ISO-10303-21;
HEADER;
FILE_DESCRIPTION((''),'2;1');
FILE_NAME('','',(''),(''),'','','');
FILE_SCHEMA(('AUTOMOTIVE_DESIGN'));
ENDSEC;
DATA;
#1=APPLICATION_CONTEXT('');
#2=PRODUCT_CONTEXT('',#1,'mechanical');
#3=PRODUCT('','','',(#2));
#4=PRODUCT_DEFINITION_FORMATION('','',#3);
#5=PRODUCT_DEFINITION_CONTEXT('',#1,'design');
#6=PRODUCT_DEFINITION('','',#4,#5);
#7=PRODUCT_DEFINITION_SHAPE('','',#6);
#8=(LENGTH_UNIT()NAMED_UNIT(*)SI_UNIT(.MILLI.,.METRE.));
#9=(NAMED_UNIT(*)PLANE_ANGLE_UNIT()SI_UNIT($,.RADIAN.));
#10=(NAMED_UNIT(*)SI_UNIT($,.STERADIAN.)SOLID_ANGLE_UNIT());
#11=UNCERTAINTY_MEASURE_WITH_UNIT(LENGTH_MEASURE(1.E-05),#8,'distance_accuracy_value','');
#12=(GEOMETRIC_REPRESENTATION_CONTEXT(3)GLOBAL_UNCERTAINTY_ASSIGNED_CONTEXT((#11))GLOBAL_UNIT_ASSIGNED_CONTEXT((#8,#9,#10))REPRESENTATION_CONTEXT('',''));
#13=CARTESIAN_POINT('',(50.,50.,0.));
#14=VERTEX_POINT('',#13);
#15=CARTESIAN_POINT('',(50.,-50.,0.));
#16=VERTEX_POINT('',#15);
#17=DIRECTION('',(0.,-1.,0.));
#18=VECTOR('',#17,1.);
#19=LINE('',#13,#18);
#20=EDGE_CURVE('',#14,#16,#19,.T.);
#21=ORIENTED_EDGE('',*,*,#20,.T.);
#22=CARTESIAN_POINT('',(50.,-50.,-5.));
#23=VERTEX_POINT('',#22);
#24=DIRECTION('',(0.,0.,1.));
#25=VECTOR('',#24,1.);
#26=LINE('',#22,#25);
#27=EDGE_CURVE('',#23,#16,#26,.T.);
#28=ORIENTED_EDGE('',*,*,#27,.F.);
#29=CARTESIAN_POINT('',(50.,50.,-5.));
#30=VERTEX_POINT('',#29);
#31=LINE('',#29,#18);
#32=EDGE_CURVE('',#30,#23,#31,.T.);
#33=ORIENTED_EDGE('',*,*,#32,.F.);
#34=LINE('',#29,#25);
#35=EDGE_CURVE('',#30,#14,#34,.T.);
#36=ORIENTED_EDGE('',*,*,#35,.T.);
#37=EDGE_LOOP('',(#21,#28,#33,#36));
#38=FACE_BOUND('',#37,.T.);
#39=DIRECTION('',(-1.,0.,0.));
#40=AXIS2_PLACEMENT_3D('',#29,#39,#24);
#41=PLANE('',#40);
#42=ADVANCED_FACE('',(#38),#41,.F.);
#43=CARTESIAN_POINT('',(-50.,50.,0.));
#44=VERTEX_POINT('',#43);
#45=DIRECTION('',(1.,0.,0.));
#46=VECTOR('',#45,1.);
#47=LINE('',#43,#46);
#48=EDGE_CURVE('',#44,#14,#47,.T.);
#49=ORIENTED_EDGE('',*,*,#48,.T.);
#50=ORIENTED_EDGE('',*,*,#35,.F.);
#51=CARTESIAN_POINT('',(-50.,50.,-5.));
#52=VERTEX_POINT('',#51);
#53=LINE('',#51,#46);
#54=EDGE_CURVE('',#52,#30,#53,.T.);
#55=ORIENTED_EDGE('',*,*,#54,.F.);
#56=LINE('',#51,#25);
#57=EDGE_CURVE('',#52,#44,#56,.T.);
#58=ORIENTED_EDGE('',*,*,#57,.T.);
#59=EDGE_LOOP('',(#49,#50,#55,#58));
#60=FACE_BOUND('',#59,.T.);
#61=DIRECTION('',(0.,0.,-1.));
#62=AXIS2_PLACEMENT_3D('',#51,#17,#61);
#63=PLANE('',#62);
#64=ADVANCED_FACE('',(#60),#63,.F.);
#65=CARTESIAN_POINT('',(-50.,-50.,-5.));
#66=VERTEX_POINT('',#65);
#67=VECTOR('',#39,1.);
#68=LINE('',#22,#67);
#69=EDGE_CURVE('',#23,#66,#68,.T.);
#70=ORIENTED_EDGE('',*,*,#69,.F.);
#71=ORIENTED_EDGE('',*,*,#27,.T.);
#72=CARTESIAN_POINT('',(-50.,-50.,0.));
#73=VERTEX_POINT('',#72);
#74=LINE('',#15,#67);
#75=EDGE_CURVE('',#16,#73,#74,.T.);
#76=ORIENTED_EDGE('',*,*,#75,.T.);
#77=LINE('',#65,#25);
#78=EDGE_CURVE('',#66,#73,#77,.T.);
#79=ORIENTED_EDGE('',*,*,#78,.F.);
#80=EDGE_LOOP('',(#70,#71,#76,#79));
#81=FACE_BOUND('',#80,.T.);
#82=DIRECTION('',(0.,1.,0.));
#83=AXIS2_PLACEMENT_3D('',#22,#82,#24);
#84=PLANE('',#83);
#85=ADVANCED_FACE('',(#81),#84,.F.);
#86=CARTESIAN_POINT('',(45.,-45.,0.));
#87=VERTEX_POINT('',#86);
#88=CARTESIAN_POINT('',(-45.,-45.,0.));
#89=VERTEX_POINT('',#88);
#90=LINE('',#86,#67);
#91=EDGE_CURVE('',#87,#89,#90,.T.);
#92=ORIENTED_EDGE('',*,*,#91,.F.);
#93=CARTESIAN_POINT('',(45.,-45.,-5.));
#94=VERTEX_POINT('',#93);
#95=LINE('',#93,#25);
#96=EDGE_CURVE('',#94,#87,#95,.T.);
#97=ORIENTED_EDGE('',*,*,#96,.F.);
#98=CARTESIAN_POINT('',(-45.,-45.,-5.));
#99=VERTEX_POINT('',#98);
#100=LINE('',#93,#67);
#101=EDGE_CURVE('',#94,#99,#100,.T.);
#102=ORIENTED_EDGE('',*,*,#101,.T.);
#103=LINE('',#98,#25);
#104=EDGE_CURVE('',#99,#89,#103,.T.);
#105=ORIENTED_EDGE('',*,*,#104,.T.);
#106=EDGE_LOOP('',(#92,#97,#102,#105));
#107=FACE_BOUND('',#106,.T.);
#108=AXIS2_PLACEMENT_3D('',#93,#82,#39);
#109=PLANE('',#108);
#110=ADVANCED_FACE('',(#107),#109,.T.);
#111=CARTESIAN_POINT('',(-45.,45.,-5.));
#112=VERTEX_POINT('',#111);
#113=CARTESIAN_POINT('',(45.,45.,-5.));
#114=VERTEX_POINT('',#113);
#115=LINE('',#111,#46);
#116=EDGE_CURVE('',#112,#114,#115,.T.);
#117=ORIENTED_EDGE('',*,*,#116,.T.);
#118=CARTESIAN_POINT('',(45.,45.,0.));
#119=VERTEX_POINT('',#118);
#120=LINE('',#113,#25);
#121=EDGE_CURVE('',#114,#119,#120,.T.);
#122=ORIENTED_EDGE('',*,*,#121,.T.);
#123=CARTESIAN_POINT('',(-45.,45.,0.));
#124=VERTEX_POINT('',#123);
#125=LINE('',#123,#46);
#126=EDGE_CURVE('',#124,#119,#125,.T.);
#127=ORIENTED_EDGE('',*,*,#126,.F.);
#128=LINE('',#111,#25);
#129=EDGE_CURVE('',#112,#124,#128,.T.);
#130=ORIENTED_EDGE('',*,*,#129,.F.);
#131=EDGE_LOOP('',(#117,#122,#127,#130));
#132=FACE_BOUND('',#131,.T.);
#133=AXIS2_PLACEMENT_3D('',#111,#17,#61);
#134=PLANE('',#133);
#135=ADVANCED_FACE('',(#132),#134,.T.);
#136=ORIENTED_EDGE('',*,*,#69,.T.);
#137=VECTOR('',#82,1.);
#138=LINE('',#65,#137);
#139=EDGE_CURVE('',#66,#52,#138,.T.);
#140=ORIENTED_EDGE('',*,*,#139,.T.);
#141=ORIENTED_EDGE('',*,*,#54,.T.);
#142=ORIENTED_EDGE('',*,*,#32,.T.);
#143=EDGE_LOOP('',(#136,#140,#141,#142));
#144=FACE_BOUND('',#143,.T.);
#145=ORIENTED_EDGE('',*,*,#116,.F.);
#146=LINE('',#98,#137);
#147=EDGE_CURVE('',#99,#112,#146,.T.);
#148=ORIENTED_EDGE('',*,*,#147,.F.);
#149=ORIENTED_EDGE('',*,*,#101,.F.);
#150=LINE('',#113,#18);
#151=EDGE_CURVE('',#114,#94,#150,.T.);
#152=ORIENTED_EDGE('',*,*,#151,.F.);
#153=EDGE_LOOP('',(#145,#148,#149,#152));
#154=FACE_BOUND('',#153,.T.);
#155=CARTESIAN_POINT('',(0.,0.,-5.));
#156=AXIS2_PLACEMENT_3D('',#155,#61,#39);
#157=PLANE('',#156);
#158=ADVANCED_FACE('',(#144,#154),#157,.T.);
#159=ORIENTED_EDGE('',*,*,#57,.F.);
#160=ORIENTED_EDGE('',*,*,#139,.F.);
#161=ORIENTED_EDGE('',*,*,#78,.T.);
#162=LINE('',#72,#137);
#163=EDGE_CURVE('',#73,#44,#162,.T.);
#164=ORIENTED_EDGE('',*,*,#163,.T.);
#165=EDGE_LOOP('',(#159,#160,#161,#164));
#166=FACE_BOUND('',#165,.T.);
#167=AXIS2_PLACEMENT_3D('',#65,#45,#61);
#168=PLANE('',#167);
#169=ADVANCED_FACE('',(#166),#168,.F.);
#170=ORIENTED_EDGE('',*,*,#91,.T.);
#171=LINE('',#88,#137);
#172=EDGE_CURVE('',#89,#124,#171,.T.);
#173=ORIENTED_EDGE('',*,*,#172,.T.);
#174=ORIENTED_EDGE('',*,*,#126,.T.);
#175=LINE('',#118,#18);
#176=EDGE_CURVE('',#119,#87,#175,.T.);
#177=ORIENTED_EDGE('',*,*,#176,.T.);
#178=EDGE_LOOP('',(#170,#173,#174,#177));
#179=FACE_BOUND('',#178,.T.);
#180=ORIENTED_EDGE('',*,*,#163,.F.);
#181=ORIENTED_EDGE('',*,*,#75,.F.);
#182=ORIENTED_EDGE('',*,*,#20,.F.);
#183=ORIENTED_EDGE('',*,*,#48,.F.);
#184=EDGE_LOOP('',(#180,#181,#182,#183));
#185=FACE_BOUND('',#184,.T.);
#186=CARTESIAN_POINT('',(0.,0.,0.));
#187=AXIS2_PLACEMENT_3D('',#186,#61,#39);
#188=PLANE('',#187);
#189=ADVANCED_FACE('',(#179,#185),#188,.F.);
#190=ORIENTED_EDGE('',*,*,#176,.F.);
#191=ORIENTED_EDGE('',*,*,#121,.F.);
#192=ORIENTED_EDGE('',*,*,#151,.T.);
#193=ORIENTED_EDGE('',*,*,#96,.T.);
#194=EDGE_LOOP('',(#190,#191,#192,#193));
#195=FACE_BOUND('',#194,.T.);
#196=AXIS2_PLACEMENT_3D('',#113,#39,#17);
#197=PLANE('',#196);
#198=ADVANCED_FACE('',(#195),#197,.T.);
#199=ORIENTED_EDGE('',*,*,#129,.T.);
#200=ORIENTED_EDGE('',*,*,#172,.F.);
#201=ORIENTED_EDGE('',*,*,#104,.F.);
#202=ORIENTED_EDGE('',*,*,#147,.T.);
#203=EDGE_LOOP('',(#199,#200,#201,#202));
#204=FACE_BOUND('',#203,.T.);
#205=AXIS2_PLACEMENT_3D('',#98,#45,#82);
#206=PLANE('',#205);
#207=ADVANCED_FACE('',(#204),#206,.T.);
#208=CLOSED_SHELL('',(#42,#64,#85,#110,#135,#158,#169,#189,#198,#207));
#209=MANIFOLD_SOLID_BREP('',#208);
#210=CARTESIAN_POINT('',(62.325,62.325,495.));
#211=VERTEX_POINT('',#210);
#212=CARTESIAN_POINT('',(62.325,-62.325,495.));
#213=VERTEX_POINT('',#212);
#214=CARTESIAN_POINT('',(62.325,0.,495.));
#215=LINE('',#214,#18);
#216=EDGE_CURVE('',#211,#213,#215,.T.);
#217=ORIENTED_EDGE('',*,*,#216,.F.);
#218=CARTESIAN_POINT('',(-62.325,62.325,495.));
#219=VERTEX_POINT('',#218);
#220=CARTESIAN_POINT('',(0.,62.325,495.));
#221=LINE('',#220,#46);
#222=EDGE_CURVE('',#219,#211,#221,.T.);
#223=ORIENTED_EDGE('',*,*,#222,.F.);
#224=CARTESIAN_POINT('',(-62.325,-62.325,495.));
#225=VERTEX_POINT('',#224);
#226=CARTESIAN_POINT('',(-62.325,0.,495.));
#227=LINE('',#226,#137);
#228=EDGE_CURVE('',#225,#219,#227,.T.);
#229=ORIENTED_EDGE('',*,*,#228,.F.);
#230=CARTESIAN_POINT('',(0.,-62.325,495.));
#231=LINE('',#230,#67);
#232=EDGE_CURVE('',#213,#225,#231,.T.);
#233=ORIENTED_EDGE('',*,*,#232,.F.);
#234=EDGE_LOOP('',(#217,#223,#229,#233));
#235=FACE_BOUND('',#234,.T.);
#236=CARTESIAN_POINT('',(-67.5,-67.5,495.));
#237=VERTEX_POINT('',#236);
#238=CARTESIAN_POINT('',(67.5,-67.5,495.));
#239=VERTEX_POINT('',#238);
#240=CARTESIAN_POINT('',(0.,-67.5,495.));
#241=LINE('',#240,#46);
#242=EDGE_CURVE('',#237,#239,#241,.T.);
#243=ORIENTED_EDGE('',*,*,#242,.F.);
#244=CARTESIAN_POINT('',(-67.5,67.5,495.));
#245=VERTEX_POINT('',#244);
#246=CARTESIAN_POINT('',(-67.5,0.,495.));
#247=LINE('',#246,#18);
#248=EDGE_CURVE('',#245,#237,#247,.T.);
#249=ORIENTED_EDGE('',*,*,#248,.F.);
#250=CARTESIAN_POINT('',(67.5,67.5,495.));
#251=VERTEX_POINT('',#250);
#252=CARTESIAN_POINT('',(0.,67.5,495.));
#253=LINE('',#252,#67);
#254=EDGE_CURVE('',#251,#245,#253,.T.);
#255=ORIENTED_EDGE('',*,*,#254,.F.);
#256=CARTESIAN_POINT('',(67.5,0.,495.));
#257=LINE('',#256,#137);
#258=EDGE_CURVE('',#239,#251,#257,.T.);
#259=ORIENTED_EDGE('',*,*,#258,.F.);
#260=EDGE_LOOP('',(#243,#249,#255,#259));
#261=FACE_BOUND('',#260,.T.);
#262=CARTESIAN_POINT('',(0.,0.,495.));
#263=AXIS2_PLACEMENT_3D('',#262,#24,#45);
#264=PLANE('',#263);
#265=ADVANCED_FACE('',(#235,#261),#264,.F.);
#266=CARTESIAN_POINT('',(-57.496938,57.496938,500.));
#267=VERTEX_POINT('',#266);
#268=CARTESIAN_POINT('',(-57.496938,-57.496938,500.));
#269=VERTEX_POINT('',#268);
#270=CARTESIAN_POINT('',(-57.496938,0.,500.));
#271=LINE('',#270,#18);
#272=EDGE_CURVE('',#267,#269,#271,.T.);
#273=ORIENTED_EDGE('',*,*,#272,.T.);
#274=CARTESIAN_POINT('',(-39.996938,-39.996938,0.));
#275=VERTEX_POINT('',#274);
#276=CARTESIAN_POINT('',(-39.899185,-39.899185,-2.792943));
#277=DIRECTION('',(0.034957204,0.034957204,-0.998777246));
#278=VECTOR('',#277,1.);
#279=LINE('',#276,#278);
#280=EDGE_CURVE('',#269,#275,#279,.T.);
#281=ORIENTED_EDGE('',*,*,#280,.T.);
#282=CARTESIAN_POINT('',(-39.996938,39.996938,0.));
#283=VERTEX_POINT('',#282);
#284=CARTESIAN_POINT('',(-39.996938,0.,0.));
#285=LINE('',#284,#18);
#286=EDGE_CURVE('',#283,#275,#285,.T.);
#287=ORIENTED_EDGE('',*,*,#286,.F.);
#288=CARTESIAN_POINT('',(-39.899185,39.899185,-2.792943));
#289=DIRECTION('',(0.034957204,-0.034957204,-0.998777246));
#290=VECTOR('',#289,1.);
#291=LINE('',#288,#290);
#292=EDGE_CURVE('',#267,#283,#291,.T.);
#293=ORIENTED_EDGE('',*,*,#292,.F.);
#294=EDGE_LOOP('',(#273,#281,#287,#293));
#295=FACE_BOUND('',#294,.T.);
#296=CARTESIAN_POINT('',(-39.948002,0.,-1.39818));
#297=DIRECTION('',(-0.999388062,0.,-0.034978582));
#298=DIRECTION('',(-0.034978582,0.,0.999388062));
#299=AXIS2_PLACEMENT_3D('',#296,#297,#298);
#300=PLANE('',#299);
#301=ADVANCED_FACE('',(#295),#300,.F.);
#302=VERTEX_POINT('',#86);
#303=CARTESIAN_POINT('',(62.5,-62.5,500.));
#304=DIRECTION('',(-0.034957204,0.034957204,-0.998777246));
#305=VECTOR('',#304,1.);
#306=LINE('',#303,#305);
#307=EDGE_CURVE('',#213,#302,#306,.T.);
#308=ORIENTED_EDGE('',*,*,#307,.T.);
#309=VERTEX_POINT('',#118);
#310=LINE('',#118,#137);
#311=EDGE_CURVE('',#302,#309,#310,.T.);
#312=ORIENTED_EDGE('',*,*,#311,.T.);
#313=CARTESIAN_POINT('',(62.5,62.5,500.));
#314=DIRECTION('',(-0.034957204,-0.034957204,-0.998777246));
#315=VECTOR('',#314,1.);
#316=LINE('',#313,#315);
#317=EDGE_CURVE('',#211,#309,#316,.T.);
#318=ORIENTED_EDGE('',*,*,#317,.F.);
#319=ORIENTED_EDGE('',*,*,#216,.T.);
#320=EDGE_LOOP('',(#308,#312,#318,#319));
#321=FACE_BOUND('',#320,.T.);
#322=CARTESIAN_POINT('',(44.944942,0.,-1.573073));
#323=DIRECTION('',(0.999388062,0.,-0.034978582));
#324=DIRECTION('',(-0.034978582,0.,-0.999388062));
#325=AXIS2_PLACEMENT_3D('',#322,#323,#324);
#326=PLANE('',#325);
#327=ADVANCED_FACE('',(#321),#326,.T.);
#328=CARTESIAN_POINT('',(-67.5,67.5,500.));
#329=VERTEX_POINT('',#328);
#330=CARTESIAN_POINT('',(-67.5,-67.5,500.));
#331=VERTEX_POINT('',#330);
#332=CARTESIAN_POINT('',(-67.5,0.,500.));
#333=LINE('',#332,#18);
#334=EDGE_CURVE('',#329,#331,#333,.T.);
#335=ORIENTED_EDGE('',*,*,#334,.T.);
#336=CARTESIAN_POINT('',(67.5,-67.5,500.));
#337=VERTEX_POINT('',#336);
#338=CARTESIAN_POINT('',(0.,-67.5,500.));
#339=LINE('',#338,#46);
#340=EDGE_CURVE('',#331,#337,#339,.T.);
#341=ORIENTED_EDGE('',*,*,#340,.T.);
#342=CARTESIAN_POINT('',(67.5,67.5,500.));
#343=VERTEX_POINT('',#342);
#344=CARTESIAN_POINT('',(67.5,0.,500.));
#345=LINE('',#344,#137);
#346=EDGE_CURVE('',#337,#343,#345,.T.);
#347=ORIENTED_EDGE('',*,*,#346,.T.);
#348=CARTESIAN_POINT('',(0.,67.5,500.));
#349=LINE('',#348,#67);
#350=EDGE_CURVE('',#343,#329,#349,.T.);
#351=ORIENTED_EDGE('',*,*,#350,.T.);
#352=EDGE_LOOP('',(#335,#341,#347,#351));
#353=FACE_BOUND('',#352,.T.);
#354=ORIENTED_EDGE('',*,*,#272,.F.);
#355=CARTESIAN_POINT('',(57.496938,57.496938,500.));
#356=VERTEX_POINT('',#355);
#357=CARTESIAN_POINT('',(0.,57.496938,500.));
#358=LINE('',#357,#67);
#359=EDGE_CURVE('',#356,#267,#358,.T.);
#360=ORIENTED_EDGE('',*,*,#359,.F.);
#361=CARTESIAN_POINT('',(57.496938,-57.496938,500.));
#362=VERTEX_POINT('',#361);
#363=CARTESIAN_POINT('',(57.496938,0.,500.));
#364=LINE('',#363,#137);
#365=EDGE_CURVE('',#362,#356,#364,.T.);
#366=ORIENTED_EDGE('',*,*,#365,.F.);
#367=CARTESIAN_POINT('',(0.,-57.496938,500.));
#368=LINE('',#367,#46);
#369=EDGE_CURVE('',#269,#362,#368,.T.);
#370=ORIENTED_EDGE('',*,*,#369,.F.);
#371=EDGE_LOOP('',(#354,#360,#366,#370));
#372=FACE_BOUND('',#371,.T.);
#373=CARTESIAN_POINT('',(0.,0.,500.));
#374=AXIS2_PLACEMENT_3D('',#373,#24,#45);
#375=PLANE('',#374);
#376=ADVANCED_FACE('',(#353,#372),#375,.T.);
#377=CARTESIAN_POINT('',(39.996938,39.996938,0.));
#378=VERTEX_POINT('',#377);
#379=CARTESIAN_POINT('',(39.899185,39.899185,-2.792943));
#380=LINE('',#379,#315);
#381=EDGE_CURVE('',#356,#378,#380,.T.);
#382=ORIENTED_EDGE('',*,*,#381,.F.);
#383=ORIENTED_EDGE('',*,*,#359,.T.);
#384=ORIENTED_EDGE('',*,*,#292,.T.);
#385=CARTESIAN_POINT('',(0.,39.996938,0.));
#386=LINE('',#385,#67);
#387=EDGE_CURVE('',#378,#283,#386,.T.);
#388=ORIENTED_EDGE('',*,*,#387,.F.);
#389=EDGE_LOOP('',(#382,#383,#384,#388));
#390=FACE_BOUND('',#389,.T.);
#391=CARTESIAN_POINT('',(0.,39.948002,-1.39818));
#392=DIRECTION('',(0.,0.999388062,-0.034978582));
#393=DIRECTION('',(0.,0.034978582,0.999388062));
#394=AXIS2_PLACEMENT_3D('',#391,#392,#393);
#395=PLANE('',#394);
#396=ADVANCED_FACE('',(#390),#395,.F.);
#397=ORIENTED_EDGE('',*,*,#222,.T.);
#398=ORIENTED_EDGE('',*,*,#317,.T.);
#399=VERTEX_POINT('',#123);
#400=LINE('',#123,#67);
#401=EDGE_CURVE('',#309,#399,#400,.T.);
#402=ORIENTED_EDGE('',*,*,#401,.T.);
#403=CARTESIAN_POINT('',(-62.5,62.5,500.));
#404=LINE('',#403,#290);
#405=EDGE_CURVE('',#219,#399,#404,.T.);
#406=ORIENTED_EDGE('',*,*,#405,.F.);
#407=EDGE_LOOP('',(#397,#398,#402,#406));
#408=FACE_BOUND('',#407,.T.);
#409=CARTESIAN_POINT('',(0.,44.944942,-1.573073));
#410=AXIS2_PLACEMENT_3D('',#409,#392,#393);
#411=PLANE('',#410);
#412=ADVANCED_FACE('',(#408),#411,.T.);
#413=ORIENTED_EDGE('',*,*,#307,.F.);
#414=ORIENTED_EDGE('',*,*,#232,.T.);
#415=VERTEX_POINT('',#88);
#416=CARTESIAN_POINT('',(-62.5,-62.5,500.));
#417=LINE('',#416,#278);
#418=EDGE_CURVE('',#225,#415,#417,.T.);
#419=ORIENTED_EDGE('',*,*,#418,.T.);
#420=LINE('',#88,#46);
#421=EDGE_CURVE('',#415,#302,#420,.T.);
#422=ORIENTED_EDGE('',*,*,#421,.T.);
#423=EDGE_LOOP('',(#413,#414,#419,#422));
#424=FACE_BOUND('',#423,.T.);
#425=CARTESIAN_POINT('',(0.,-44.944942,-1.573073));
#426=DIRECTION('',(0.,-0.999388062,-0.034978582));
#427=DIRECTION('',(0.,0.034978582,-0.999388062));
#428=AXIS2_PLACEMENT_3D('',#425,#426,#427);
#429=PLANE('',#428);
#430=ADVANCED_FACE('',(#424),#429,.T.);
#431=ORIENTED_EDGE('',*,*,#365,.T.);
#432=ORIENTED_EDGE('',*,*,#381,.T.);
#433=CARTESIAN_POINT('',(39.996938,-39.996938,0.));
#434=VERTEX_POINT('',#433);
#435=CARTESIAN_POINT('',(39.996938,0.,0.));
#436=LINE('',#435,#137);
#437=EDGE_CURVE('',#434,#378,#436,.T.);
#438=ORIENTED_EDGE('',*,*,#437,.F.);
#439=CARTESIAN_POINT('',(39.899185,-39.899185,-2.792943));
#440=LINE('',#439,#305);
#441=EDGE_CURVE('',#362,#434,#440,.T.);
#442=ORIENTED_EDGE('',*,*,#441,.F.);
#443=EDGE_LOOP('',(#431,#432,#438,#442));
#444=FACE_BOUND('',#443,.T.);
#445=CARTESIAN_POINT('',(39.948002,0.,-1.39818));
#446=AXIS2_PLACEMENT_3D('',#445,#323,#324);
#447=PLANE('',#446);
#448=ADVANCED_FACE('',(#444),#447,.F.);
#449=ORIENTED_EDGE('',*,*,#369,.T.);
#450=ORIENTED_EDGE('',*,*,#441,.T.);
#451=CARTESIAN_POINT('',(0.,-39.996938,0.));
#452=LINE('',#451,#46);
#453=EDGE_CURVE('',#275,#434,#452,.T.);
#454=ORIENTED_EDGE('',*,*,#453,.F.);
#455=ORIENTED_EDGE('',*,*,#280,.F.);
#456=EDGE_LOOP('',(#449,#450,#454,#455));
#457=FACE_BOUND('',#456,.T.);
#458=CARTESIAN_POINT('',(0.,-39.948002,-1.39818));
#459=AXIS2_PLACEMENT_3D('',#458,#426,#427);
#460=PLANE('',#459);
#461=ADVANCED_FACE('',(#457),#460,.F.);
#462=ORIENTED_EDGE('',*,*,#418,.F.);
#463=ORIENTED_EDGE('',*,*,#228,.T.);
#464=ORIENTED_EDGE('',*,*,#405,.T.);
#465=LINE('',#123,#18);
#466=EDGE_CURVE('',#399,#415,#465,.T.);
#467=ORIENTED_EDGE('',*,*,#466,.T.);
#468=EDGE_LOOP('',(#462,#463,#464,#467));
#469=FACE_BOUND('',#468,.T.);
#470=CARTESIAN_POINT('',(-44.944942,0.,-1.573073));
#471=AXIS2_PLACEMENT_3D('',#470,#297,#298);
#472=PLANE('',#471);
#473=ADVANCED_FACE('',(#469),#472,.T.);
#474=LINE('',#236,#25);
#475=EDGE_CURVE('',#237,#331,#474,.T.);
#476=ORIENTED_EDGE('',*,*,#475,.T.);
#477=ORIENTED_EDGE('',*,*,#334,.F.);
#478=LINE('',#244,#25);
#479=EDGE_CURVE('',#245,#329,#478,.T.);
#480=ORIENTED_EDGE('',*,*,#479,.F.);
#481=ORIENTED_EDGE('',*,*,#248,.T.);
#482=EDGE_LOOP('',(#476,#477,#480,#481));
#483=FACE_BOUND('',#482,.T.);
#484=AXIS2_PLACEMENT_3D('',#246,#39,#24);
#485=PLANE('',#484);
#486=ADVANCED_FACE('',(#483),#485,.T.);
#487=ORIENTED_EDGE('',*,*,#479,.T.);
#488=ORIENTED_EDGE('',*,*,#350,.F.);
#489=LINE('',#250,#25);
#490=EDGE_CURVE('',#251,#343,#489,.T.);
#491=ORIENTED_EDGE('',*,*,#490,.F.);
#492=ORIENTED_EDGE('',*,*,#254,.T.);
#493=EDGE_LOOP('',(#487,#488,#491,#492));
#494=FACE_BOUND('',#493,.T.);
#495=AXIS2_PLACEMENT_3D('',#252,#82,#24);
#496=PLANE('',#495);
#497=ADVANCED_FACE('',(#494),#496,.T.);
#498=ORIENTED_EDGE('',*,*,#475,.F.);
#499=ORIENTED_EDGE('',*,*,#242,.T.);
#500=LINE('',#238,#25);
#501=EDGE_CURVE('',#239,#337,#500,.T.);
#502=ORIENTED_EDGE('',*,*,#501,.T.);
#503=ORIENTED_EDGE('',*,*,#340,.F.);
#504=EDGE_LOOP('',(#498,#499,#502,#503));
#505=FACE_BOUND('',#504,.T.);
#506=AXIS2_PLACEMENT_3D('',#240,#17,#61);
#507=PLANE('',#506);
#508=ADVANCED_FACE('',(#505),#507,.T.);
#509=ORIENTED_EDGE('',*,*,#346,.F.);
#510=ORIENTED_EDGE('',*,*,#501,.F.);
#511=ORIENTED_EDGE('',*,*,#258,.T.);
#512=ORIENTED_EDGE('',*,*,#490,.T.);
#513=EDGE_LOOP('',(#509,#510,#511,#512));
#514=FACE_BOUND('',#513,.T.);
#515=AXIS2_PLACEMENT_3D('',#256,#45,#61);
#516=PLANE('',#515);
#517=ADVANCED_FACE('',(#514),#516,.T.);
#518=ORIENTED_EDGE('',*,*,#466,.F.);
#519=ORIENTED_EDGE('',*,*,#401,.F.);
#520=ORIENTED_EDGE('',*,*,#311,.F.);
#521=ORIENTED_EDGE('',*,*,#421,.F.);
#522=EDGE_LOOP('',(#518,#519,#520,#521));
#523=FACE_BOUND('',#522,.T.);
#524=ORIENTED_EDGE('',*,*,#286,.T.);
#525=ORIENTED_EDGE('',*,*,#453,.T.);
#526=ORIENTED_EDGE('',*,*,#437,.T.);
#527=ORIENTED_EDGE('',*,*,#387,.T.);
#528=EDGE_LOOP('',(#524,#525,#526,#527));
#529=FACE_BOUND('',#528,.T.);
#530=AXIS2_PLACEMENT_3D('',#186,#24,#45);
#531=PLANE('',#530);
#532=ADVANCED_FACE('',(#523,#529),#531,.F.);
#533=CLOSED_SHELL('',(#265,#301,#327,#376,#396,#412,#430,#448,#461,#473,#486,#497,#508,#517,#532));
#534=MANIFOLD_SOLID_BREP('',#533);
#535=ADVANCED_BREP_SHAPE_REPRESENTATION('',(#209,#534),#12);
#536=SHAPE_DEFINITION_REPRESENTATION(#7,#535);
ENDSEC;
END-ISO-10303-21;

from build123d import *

# Parameters (mm, degrees)
SHELL2_T            = -5
SKETCH5_W           = 100
SKETCH5_H           = 100
SKETCH5_W_2         = 90
SKETCH5_H_2         = 90
BOSS_EXTRUDE1_DEPTH = 5
SKETCH6_W           = 135
SKETCH6_H           = 135
SKETCH6_W_2         = 114.993876874
SKETCH6_H_2         = 114.993876874
BOSS_EXTRUDE2_DEPTH = 5


with BuildPart() as part:
    # Sketch4 → Loft2 section 0
    with BuildSketch(Plane.XY.offset(500)):
        with BuildLine():
            Line((-62.5, 62.5), (62.5, 62.5))
            Line((62.5, 62.5), (62.5, -62.5))
            Line((62.5, -62.5), (-62.5, -62.5))
            Line((-62.5, -62.5), (-62.5, 62.5))
        make_face()
    # Sketch1 → Loft2 section 1
    with BuildSketch(Plane.XY):
        with BuildLine():
            Line((-45, 45), (45, 45))
            Line((45, 45), (45, -45))
            Line((45, -45), (-45, -45))
            Line((-45, -45), (-45, 45))
        make_face()
    loft()

    # Shell2
    shell2_openings = [part.faces().sort_by_distance(p)[0] for p in [
        (0, 0, 0),
        (0, 0, 500),
    ]]
    offset(amount=SHELL2_T, openings=shell2_openings, kind=Kind.INTERSECTION)

    # Sketch6 → Boss-Extrude2 (add)
    with BuildSketch(Plane.XY.offset(500)):
        Rectangle(SKETCH6_W, SKETCH6_H)
        Rectangle(SKETCH6_W_2, SKETCH6_H_2, mode=Mode.SUBTRACT)
    extrude(amount=-BOSS_EXTRUDE2_DEPTH)


with BuildPart() as body_2:
    # Sketch5 → Boss-Extrude1 (new body)
    with BuildSketch(Plane(origin=(0, 0, 0), x_dir=(-1, 0, 0), z_dir=(0, 0, -1))):
        Rectangle(SKETCH5_W, SKETCH5_H)
        Rectangle(SKETCH5_W_2, SKETCH5_H_2, mode=Mode.SUBTRACT)
    extrude(amount=BOSS_EXTRUDE1_DEPTH)


solid = Compound([part.part, body_2.part])
